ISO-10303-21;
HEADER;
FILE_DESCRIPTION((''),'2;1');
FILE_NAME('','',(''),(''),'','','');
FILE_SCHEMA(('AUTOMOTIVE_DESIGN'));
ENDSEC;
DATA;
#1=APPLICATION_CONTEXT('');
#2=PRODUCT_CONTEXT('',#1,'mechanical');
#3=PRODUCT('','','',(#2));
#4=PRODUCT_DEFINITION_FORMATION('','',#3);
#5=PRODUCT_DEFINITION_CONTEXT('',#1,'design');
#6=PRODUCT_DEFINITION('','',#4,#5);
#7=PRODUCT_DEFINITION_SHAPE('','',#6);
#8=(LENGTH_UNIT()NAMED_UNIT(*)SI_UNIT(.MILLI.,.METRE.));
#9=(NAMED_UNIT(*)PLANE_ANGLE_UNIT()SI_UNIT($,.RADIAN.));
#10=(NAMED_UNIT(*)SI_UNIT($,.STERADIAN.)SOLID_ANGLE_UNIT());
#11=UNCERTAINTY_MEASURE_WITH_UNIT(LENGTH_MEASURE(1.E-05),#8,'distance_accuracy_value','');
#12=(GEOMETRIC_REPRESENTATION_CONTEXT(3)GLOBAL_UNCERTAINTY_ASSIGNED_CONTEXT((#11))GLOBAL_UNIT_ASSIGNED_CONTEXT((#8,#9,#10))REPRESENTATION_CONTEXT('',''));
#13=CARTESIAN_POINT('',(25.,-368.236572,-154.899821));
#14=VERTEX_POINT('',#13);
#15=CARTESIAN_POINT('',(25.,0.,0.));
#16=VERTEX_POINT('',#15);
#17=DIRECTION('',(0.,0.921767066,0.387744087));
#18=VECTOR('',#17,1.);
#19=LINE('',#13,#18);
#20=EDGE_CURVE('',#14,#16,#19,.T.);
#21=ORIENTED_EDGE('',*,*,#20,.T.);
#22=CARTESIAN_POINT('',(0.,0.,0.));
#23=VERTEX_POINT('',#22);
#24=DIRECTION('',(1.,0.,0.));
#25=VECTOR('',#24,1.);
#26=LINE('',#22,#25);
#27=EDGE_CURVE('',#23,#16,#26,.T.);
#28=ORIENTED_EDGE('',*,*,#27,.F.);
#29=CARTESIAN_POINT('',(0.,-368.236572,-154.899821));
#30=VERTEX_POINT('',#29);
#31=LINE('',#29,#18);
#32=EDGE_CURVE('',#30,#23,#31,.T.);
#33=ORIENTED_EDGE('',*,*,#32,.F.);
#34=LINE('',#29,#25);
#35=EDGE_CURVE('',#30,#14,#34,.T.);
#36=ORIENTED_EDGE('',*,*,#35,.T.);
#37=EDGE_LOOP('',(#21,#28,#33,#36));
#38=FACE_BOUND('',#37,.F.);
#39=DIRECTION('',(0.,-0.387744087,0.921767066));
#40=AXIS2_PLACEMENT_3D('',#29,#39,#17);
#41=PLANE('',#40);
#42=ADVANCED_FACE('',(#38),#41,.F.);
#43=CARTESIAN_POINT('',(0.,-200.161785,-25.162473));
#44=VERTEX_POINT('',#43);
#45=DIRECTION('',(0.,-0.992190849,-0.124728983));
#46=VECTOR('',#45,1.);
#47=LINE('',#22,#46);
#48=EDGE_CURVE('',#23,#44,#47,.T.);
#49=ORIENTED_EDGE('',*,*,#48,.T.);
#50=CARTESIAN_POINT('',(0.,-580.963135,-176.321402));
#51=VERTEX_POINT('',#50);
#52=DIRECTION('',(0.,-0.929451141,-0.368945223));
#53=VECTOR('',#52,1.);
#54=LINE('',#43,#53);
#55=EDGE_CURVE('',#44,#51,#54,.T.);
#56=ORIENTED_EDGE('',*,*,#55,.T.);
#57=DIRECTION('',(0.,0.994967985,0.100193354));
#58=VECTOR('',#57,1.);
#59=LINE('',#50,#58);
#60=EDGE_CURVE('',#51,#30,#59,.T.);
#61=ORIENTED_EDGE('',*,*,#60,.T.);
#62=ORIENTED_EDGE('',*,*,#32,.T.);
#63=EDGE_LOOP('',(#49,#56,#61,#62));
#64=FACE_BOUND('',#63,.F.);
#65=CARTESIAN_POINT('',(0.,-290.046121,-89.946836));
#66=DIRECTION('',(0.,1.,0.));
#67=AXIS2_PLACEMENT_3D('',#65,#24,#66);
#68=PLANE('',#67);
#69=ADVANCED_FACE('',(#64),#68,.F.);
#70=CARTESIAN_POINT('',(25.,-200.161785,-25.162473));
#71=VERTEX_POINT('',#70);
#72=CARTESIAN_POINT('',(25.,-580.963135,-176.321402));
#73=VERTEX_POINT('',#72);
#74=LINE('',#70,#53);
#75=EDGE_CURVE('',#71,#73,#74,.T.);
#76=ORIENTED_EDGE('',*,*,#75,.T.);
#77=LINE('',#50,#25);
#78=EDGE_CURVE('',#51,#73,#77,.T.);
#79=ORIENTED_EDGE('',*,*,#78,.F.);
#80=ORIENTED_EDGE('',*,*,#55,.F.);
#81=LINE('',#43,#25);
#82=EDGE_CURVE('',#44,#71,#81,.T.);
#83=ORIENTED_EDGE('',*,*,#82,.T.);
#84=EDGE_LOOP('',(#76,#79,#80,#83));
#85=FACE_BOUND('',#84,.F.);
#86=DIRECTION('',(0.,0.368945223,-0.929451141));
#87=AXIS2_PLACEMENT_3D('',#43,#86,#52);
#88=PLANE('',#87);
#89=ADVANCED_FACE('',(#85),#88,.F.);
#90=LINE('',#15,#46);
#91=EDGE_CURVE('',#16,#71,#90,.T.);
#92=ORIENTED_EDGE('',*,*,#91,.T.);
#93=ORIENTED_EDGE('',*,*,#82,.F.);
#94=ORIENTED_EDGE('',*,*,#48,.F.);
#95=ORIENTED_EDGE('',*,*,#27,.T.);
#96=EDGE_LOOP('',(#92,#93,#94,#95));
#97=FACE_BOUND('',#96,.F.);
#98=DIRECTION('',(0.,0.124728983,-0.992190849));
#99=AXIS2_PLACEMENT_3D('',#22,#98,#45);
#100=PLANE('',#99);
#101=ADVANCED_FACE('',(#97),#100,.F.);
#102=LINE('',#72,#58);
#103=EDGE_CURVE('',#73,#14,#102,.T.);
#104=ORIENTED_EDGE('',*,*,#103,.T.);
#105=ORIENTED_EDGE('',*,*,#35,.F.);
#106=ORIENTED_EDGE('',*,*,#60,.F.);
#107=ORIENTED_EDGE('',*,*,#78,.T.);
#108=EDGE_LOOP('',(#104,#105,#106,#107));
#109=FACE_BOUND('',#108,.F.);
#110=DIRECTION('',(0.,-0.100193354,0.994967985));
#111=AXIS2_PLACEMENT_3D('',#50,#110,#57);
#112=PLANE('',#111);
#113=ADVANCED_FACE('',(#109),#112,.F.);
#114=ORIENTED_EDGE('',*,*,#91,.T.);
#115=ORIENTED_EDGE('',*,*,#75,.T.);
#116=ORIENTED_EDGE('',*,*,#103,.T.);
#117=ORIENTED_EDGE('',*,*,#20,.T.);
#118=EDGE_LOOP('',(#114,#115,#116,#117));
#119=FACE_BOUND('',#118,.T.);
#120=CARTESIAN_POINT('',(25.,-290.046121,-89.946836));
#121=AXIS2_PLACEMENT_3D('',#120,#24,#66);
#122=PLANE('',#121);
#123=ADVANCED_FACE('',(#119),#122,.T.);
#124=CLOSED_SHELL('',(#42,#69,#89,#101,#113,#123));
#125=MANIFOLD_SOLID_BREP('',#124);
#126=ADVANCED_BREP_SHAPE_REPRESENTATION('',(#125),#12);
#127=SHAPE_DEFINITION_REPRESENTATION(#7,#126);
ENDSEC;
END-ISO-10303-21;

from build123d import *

# Parameters (mm, degrees)
F1_DEPTH = 25


# Not quite as in the source:
# - a feature of the source that left no trace in its solid (it failed there, or was rolled back) is left out


with BuildPart() as f1:
    # F0 (on Right) → F1 (new body)
    with BuildSketch(Plane.YZ):
        Polygon((-368.2365715504, -154.8998206854), (0, 0), (-200.1617848873, -25.162473321), (-580.9631347656, -176.3214021921), align=None)
    extrude(amount=F1_DEPTH)


solid = f1.part
